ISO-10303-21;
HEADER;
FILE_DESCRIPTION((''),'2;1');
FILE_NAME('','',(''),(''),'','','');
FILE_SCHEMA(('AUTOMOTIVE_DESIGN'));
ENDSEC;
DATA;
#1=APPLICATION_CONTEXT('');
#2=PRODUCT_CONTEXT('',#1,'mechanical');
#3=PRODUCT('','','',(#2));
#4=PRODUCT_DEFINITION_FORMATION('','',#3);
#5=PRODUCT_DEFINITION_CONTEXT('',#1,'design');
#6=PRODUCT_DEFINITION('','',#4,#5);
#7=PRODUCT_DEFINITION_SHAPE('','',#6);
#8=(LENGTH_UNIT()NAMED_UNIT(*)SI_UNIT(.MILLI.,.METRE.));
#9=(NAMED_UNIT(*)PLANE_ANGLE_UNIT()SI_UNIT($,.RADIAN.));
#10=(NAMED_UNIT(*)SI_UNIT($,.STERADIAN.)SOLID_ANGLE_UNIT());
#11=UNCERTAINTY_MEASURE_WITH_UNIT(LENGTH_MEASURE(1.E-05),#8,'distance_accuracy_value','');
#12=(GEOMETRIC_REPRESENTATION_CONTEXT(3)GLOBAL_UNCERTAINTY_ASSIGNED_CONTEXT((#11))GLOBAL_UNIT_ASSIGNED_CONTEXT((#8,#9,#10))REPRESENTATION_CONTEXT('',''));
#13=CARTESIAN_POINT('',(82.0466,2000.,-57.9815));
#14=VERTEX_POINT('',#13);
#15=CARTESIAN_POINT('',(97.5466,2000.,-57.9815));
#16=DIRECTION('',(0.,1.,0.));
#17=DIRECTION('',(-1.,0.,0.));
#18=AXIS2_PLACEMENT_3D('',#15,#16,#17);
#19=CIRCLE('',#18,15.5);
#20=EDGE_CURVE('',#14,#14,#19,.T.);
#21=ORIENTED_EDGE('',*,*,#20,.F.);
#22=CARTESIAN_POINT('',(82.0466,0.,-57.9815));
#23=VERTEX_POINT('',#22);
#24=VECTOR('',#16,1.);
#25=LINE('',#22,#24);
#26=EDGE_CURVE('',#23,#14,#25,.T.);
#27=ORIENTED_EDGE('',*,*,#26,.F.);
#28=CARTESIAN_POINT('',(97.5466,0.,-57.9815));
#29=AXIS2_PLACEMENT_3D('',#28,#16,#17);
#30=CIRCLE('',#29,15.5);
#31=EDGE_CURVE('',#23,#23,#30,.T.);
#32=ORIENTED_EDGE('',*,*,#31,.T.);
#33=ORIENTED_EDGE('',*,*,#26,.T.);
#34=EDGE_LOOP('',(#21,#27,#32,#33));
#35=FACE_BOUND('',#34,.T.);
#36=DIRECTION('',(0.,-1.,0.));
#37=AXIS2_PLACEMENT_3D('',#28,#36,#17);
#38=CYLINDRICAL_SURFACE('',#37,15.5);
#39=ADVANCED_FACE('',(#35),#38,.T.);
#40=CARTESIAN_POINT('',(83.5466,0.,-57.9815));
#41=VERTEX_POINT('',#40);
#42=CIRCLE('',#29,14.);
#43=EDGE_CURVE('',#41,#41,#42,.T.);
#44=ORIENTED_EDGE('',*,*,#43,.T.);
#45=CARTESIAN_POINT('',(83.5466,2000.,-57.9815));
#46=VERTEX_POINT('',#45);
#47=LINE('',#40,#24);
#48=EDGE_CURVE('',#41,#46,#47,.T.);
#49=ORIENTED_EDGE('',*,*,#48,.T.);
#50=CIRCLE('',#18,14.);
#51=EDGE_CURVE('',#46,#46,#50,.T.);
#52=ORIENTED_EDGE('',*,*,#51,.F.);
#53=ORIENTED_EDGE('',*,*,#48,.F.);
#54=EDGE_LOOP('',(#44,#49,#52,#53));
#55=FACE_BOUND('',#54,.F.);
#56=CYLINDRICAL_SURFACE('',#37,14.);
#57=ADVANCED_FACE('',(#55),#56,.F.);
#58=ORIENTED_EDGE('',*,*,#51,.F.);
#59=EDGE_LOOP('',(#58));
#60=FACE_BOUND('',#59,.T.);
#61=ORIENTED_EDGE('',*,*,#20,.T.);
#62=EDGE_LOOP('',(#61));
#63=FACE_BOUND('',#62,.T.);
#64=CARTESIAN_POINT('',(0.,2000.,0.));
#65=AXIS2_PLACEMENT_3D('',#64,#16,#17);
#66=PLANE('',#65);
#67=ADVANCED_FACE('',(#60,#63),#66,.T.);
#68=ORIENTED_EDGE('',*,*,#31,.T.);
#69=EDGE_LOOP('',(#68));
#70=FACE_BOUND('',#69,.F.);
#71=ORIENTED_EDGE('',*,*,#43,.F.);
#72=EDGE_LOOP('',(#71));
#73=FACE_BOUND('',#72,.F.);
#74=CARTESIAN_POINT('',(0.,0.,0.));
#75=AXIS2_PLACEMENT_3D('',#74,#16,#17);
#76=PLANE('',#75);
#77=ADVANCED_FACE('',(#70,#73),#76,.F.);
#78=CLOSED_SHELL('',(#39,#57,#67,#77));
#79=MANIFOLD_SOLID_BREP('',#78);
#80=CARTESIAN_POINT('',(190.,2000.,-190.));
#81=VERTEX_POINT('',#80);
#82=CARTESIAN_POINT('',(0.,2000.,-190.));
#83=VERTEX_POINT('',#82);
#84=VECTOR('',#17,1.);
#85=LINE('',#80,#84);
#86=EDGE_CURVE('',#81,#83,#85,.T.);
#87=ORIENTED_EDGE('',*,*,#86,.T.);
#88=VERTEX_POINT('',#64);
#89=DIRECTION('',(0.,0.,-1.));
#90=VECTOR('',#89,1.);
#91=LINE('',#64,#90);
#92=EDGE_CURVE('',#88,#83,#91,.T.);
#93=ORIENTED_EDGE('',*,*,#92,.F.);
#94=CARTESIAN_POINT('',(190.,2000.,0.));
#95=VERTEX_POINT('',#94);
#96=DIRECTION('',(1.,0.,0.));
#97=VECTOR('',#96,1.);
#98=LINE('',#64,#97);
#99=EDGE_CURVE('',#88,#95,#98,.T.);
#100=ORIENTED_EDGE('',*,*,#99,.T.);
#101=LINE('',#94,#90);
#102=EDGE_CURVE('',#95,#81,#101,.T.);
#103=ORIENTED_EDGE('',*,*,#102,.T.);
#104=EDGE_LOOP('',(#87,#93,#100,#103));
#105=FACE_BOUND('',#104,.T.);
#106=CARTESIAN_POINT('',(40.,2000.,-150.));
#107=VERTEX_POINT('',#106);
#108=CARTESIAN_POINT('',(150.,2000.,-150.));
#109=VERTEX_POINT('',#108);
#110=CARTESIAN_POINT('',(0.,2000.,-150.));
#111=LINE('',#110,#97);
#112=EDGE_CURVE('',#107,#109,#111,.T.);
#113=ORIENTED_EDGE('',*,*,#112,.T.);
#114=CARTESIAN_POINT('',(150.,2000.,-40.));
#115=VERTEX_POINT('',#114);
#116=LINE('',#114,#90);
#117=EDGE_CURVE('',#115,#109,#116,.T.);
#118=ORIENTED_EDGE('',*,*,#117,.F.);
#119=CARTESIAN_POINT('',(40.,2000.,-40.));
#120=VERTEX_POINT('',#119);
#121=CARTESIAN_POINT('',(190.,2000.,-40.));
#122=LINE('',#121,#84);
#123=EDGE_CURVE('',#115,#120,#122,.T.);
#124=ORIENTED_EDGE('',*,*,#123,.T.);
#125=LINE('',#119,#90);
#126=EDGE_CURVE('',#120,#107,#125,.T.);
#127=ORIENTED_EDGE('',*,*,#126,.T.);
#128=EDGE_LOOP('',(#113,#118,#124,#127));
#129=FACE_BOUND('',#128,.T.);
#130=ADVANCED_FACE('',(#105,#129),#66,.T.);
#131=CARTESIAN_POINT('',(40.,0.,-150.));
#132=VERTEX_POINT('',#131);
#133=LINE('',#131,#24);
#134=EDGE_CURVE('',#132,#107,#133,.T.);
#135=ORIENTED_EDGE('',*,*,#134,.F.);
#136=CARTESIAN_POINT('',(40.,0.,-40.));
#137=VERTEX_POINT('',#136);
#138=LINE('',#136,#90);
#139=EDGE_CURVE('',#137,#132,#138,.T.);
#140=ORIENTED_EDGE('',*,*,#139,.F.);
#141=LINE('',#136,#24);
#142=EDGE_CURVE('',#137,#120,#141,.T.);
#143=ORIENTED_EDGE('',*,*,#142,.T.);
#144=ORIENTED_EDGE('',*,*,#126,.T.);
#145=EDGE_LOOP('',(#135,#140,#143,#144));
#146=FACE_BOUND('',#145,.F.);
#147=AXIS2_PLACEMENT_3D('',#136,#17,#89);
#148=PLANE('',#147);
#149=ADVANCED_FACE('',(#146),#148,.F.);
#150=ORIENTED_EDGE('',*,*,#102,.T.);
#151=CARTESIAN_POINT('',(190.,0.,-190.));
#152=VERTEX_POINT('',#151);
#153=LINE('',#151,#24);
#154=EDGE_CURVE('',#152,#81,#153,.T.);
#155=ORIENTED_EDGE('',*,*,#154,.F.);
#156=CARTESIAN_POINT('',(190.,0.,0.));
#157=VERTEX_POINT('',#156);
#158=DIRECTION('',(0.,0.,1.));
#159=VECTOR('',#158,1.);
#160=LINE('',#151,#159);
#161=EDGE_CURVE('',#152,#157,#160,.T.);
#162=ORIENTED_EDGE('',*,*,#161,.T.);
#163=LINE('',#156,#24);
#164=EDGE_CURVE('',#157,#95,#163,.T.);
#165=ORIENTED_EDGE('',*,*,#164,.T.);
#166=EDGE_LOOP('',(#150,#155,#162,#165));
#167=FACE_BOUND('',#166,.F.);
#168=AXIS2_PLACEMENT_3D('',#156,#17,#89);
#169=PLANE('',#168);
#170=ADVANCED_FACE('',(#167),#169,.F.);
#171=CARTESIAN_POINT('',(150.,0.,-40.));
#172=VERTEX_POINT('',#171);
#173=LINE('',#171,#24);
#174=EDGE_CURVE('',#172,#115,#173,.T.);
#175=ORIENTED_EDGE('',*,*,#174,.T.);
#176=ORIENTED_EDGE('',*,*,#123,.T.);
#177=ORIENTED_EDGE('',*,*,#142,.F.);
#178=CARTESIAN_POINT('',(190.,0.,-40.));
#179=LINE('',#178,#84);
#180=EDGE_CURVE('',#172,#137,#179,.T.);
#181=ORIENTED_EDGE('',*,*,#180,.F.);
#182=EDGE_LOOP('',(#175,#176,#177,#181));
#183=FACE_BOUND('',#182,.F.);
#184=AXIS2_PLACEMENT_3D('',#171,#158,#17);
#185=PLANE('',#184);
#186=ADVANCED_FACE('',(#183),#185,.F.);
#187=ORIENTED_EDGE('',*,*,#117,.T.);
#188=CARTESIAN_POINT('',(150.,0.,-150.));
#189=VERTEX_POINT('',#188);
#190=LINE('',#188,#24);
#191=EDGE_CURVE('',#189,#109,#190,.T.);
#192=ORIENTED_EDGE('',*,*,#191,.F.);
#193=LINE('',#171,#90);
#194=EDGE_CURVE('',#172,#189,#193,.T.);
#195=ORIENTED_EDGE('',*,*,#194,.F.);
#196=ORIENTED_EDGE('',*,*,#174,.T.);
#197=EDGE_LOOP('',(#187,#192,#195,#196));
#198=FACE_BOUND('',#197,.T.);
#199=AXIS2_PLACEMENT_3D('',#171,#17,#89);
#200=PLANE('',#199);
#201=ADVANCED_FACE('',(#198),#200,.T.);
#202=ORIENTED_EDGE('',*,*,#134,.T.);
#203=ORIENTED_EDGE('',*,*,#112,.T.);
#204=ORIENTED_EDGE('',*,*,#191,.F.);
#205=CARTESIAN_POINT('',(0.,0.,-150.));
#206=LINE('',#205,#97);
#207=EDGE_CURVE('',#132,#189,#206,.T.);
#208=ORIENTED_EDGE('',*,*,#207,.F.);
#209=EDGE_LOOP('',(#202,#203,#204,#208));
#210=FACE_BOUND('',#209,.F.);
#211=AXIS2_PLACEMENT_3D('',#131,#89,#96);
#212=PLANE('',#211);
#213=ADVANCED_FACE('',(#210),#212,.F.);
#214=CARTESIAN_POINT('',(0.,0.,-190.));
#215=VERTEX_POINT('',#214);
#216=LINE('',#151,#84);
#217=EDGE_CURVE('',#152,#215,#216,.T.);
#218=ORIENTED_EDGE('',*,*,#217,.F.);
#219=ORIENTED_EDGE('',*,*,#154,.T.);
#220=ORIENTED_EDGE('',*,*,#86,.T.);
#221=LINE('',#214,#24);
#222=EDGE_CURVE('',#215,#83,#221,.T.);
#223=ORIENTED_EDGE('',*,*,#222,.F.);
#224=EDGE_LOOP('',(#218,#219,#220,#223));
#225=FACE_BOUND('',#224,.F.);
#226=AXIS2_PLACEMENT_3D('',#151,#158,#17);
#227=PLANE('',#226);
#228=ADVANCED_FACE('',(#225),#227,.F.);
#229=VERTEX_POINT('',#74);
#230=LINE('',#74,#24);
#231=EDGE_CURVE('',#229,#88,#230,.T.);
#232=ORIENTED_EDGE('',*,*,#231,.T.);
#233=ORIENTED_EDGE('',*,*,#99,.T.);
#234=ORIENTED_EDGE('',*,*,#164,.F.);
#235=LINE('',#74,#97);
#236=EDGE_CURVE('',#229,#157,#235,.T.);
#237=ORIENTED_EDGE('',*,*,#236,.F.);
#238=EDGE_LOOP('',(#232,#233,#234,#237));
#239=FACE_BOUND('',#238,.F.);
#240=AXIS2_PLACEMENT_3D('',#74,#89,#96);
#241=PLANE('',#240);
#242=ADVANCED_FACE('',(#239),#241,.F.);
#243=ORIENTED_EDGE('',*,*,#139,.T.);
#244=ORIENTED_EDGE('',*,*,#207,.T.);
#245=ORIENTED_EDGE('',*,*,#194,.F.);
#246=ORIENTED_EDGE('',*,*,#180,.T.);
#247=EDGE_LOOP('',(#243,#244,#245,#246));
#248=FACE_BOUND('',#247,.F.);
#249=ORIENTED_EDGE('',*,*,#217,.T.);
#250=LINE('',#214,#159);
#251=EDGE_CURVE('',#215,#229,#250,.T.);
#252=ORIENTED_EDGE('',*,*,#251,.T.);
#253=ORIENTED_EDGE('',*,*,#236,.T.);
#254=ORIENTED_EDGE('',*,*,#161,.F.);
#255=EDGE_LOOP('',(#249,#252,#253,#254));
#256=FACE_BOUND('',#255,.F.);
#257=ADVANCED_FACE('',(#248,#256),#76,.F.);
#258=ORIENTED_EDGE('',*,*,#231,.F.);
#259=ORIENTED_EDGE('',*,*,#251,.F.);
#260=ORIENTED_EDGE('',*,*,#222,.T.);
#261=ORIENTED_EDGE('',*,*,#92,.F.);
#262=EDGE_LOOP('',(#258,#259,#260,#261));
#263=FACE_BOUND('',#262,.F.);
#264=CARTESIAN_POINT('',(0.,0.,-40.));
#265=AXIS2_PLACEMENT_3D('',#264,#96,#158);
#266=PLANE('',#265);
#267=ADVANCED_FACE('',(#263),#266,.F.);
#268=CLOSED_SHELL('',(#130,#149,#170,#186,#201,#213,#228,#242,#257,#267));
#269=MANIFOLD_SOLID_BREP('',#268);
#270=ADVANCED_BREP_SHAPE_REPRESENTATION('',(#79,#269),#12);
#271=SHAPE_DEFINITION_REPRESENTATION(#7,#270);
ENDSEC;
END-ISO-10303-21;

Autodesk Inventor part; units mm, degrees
ref_plane "YZ Plane" through (0, 0, 0) normal (1, 0, 0) x (0, 1, 0)
ref_plane "XZ Plane" through (0, 0, 0) normal (0, 1, 0) x (-1, 0, 0)
ref_plane "XY Plane" through (0, 0, 0) normal (0, 0, 1) x (1, 0, 0)
sketch "Sketch1" plane through (0, 0, 0) normal (0, 1, 0) x (-1, 0, 0)
  line L0 (0, 0) -> (-190, 0)
  line L1 (-190, 0) -> (-190, -40)
  line L2 (-190, -40) -> (0, -40)
  line L3 (0, -40) -> (0, 0)
  line L4 (0, -40) -> (-40, -40)
  line L5 (-40, -40) -> (-40, -150)
  line L6 (-40, -150) -> (0, -150)
  line L7 (0, -150) -> (0, -40)
  line L8 (-190, -40) -> (-150, -40)
  line L9 (-150, -40) -> (-150, -150)
  line L10 (-150, -150) -> (-190, -150)
  line L11 (-190, -150) -> (-190, -40)
  line L12 (0, -150) -> (-190, -150)
  line L13 (-190, -150) -> (-190, -190)
  line L14 (-190, -190) -> (0, -190)
  line L15 (0, -190) -> (0, -150)
  circle A0 centre (-97.5466, -57.9815) radius 15.5
  circle A1 centre (-97.5466, -57.9815) radius 14
  dimension "d0" = 190
  dimension "d1" = 40
  dimension "d2" = 40
  dimension "d3" = 110
  dimension "d4" = 40
  dimension "d5" = 110
  dimension "d6" = 190
  dimension "d7" = 40
  dimension "d8" = 31
  dimension "d9" = 28
extrude "Extrusion1" add sketch "Sketch1" along normal blind 2000 contours L3 L2 L1 L0 | L7 L6 L5 L2 | L2 L9 L10 L11 | L15 L14 L13 L10 L12 L6 | A0
properties part number "DIY composite curing oven"
